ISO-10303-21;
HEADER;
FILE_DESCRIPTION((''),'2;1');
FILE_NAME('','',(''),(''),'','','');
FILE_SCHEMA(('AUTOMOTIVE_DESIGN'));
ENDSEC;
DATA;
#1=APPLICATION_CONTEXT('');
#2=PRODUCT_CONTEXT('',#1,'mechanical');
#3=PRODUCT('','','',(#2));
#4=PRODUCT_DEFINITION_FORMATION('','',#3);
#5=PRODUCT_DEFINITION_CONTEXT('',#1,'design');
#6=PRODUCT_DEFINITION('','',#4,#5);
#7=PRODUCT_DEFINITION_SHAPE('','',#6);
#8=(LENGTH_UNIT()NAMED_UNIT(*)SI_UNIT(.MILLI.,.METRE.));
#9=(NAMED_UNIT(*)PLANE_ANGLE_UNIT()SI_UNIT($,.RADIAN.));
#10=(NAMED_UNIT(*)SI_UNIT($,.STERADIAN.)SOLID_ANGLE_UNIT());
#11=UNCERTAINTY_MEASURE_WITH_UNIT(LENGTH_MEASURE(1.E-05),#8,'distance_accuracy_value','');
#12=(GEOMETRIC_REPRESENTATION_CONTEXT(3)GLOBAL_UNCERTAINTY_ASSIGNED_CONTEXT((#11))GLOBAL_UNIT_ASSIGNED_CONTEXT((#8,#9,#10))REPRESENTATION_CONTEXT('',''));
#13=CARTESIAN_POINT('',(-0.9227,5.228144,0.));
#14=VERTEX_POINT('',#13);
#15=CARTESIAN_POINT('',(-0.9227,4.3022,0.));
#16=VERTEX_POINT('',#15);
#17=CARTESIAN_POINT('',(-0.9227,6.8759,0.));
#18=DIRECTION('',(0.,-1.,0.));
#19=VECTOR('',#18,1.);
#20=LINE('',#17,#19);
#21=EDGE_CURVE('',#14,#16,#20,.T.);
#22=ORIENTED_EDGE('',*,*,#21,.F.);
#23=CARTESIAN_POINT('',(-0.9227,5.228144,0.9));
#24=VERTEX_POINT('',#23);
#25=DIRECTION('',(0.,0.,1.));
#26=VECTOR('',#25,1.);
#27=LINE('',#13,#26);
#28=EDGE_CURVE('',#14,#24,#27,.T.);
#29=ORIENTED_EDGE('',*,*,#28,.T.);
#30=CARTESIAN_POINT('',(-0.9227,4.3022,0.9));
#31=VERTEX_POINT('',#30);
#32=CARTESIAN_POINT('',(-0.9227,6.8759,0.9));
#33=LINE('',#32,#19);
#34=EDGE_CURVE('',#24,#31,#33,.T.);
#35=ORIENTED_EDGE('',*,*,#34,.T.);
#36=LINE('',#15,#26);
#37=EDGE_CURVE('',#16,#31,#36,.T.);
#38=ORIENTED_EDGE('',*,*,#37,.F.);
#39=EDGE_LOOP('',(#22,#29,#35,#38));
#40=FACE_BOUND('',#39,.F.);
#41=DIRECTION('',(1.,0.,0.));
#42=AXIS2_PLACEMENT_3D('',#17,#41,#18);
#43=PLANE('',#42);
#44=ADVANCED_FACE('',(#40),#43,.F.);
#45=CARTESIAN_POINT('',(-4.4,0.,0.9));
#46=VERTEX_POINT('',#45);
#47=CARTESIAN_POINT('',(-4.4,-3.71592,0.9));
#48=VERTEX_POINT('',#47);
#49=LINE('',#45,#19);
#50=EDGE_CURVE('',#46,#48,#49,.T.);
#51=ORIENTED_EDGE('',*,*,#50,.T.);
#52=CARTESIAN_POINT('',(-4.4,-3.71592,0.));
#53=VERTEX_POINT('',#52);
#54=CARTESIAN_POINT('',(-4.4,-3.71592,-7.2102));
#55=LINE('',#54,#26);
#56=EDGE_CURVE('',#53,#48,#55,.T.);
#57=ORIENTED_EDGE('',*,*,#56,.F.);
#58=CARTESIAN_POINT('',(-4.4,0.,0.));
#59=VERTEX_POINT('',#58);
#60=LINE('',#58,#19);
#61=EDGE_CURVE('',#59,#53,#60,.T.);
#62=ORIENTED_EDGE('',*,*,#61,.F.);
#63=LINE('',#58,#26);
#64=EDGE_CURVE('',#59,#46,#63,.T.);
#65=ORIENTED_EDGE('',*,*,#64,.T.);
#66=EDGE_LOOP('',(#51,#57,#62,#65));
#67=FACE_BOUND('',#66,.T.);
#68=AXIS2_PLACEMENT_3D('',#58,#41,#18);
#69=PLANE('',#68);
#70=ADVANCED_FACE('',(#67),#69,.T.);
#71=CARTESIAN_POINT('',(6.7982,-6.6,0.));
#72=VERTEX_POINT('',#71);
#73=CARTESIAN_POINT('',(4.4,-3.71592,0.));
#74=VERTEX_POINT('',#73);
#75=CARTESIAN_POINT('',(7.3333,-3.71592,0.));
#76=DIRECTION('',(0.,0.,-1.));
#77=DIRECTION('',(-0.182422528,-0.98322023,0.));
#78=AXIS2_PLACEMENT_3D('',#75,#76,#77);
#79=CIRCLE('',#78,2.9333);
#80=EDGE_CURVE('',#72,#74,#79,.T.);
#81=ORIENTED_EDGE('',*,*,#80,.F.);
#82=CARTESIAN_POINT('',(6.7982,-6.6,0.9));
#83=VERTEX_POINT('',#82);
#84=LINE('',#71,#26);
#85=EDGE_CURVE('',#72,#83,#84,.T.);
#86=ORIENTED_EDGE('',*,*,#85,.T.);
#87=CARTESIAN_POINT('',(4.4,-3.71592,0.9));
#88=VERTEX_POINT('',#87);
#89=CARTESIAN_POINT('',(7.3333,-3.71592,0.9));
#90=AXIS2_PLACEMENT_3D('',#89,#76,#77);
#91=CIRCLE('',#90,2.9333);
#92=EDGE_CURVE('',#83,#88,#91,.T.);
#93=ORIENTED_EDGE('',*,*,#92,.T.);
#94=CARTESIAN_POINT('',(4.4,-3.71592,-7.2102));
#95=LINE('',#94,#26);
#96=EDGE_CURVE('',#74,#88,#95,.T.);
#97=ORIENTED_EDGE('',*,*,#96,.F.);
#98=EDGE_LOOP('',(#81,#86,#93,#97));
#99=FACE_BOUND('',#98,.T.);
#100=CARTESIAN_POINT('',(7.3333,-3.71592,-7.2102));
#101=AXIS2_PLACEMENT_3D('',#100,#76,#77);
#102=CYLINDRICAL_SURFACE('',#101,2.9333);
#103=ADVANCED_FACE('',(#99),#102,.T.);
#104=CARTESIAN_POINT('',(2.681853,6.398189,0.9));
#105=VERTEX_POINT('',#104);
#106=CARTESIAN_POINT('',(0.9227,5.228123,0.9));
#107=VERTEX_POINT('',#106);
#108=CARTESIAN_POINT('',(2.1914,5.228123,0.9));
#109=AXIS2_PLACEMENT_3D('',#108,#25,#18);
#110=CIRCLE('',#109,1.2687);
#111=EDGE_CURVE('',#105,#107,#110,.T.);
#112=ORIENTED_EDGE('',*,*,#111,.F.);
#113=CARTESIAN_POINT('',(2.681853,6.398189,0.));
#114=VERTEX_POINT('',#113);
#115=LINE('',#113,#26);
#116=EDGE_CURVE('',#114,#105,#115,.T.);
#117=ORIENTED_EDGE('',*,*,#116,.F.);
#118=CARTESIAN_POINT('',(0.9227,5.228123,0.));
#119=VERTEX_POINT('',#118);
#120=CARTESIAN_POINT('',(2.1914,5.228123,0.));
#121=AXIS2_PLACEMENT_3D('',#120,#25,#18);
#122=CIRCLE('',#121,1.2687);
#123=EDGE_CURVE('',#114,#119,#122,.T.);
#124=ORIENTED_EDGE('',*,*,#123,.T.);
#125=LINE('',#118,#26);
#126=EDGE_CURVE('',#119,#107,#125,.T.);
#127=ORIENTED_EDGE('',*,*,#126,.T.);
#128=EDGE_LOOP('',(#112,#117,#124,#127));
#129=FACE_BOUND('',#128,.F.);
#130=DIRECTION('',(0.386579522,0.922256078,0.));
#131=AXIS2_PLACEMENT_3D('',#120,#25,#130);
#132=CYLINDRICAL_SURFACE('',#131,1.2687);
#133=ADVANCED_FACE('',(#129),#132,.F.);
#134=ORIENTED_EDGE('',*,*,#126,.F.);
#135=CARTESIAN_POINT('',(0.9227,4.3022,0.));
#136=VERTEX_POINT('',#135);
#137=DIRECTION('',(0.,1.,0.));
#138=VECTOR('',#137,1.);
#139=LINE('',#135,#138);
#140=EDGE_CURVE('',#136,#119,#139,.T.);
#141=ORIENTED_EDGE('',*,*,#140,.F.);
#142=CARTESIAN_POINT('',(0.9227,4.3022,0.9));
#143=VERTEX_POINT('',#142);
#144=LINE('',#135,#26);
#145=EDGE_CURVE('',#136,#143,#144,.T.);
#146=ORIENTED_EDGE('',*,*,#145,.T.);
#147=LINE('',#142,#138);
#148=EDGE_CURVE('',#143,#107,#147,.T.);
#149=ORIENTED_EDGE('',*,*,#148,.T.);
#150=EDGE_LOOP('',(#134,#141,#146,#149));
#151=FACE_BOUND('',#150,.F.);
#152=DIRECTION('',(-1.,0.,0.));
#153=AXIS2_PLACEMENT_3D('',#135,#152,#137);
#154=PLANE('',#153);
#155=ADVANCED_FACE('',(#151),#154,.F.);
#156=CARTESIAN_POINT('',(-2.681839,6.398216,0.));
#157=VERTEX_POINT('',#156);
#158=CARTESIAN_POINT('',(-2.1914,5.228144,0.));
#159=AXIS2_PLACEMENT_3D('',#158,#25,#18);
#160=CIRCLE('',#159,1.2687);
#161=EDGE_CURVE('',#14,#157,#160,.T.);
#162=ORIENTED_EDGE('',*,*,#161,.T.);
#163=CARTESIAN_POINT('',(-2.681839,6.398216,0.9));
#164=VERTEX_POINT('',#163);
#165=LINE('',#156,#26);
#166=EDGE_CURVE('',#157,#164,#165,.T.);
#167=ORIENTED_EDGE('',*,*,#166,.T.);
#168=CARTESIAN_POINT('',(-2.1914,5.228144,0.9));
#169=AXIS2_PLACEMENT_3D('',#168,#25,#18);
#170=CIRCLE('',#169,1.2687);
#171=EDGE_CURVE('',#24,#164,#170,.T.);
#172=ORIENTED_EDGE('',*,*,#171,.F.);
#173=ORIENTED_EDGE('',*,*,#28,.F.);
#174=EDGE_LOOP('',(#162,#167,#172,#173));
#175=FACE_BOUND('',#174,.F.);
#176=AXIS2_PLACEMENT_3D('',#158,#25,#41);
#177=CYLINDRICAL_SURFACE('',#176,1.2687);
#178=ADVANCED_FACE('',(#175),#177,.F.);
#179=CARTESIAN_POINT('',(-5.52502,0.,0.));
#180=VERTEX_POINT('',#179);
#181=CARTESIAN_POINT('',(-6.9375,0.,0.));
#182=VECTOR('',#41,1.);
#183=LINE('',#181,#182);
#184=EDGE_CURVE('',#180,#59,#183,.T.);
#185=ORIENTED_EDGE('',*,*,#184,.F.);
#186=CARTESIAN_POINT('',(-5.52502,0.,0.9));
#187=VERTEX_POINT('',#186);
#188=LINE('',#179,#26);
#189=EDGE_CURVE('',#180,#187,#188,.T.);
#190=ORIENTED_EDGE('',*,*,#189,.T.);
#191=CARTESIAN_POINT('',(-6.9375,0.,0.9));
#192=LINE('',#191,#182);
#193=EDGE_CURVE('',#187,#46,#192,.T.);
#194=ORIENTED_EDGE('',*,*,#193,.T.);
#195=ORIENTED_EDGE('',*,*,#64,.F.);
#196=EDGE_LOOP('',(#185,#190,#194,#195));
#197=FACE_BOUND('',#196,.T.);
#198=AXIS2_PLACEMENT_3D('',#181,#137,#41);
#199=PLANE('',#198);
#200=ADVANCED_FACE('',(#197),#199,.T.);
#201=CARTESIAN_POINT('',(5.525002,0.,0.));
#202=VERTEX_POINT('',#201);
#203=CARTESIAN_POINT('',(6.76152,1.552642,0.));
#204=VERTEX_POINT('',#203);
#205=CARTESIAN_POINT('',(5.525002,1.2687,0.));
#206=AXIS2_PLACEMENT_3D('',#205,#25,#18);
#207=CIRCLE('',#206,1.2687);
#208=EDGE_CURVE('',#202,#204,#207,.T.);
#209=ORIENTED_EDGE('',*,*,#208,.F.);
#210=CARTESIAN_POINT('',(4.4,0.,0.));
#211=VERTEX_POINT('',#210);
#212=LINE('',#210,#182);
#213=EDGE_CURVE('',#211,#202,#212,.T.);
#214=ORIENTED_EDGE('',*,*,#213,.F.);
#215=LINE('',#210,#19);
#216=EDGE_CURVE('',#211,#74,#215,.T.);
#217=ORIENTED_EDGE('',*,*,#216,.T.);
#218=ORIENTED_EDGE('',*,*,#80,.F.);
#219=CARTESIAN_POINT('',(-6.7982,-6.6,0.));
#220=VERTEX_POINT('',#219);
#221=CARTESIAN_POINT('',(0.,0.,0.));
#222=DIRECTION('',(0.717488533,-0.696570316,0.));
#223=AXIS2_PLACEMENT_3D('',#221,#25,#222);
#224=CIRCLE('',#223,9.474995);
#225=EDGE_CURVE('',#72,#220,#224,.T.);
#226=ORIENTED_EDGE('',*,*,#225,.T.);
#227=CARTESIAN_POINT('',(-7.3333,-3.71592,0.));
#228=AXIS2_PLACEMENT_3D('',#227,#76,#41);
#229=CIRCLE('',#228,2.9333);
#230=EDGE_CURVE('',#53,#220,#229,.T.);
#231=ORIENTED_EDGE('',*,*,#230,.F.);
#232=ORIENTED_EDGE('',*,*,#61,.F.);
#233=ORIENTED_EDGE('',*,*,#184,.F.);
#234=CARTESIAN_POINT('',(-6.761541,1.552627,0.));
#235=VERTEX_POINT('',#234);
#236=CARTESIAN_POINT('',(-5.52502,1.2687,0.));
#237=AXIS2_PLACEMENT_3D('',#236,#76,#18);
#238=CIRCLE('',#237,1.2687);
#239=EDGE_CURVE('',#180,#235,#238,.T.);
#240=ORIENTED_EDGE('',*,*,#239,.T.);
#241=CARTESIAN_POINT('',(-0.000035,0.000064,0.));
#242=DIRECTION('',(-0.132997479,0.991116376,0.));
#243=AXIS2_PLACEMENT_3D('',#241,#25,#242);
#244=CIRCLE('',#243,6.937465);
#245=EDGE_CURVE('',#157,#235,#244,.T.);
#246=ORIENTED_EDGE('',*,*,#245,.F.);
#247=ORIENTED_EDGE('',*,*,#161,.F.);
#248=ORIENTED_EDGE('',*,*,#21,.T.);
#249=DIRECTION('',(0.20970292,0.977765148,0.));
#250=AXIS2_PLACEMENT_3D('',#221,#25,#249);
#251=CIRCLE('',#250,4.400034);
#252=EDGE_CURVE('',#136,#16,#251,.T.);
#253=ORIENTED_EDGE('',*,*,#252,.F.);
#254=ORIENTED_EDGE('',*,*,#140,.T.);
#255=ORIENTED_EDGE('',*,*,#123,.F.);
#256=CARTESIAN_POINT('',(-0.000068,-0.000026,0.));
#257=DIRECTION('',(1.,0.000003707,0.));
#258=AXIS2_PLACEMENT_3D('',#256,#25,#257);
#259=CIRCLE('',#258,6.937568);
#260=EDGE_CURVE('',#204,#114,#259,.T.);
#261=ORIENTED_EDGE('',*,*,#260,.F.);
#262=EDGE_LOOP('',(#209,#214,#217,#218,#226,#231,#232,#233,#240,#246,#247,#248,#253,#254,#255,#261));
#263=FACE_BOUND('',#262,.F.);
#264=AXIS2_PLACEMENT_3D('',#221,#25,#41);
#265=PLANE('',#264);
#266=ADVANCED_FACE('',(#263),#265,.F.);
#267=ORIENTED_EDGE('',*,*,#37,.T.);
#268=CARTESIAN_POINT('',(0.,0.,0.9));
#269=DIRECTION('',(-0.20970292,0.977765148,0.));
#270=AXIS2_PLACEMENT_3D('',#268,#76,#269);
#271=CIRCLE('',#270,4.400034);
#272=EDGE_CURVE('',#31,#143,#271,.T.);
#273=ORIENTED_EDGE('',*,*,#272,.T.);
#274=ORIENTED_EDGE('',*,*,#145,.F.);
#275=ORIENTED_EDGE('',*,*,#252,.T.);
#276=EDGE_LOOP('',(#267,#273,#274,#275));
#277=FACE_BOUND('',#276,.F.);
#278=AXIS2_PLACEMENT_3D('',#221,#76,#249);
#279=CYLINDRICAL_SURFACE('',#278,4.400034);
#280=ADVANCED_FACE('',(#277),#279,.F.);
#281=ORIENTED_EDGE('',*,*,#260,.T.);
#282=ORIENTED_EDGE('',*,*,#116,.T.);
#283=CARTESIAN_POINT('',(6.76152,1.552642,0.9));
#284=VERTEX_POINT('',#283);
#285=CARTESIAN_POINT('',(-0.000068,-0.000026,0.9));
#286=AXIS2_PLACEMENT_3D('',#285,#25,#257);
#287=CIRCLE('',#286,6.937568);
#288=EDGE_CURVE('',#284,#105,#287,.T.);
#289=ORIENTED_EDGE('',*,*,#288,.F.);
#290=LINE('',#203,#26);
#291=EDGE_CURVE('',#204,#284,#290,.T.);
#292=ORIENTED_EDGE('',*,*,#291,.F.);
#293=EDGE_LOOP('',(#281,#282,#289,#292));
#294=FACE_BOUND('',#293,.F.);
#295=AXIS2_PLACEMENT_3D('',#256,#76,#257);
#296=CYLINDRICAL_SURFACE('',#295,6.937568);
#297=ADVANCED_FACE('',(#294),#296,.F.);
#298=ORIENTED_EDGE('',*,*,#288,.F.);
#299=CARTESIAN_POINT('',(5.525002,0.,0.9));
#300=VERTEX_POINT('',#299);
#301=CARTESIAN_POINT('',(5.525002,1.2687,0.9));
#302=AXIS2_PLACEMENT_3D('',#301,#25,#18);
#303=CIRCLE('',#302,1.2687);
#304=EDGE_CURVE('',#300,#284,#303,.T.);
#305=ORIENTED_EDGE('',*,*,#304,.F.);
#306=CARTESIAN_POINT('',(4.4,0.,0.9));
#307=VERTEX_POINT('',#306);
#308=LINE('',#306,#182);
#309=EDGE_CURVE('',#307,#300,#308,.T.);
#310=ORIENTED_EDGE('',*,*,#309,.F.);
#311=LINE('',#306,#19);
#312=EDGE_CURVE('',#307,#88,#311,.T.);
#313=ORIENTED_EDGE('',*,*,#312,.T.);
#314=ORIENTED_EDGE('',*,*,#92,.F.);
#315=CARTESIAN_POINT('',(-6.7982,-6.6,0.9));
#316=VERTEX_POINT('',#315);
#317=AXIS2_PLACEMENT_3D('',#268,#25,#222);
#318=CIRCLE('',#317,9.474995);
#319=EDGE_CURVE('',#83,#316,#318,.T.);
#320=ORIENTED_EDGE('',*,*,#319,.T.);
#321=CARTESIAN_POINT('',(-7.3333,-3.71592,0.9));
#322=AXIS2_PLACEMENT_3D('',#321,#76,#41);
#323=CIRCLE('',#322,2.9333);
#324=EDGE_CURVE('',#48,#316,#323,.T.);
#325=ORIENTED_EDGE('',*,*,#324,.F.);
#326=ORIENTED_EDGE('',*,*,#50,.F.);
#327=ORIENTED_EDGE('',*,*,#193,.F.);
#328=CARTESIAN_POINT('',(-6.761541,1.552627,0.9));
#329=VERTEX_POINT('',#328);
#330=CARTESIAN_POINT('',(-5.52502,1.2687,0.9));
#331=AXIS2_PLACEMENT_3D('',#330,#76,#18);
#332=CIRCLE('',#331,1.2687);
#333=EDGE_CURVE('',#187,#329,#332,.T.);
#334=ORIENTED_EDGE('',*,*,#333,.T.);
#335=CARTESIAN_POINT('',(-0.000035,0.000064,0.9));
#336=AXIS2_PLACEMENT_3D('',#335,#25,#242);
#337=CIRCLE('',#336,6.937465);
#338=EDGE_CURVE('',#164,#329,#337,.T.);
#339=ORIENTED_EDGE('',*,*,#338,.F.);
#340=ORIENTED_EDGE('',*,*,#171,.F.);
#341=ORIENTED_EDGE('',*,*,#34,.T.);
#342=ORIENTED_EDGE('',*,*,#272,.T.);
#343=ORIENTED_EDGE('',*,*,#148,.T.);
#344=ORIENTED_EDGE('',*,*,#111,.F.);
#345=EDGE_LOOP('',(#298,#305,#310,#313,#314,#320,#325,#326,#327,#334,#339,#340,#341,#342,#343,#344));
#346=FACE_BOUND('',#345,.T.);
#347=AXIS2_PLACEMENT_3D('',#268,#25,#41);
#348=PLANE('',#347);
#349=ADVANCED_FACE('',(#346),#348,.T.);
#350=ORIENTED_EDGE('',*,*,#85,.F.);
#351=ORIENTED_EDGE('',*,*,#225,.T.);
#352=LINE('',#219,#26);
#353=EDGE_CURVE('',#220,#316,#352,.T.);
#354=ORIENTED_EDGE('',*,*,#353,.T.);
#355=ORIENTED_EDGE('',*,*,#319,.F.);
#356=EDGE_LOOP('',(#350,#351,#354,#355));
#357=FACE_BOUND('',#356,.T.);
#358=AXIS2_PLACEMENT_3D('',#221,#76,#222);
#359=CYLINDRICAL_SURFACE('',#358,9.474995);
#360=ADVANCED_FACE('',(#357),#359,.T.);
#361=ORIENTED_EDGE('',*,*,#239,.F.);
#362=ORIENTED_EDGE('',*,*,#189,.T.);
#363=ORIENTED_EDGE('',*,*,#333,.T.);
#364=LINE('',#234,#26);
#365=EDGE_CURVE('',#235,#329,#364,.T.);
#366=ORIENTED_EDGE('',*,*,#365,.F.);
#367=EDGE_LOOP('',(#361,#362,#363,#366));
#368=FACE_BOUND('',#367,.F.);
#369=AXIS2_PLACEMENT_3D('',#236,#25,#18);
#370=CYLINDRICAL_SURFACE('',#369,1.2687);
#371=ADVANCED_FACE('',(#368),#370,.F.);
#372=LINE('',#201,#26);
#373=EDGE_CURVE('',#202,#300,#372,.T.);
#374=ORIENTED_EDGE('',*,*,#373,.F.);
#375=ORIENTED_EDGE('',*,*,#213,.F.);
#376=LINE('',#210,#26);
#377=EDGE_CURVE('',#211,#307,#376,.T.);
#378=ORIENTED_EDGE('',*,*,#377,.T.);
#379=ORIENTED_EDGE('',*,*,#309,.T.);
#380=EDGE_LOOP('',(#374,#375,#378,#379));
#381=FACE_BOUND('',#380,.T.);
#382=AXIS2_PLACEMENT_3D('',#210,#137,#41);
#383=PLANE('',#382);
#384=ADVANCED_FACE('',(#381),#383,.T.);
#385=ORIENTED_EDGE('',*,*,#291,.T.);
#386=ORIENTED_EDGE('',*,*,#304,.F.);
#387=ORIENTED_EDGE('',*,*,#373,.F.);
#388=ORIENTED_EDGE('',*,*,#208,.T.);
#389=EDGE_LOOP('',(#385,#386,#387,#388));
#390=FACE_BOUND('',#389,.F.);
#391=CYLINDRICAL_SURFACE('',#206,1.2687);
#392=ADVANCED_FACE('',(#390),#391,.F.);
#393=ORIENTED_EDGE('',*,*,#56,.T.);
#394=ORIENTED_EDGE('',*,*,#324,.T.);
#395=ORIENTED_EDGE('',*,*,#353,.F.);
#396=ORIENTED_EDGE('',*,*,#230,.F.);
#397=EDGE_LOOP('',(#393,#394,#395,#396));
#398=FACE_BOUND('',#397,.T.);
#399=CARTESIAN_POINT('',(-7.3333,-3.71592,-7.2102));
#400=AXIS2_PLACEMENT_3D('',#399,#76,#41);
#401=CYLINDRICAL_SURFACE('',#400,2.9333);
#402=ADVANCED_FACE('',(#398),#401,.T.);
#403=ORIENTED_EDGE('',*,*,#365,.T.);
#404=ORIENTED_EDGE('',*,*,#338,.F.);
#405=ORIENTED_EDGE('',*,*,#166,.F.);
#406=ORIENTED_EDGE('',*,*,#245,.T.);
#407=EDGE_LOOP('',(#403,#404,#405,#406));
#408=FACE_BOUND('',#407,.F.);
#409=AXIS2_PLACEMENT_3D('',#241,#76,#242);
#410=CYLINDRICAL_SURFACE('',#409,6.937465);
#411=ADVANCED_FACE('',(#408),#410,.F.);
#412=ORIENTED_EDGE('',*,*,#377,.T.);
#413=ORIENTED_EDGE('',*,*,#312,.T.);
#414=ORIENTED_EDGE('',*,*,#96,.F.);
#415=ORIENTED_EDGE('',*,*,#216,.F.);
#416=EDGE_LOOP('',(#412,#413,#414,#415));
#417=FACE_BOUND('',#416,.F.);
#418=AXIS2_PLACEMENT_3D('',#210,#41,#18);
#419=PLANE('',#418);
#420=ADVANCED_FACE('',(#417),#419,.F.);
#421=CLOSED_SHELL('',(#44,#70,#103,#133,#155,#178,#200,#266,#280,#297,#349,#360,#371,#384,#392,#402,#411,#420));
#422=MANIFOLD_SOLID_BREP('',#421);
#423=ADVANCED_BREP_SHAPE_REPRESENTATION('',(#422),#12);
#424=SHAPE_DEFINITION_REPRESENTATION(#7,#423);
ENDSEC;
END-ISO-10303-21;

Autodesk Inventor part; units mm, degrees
ref_plane "YZ Plane" through (0, 0, 0) normal (1, 0, 0) x (0, 1, 0)
ref_plane "XZ Plane" through (0, 0, 0) normal (0, 1, 0) x (-1, 0, 0)
ref_plane "XY Plane" through (0, 0, 0) normal (0, 0, 1) x (1, 0, 0)
sketch "草图2" plane through (0, 0, 0) normal (0, 0, 1) x (1, 0, 0)
  line L0 (-6.9375, 0) -> (-4.4, 0)
  arc A0 (-0.9227, 6.8759) -> (-6.9375, 0) centre (0, 0) ccw
  line L1 (-0.9227, 6.8759) -> (-0.9227, 4.3022)
  arc A1 (0.9227, 4.3022) -> (-0.9227, 4.3022) centre (0, 0) ccw
  line L2 (0.9227, 4.3022) -> (0.9227, 6.8759)
  arc A2 (6.9375, 0) -> (0.9227, 6.8759) centre (0, 0) ccw
  line L3 (4.4, 0) -> (6.9375, 0)
  arc A3 (6.7982, -6.6) -> (-6.7982, -6.6) centre (0, 0) ccw
  line L4 (0, -3.55) -> (0, 5.55) projected
  line L5 (-4.4, 0) -> (-4.4, -6.6)
  line L6 (-4.4, -6.6) -> (-6.7982, -6.6)
  line L7 (4.4, 0) -> (4.4, -6.6)
  line L8 (4.4, -6.6) -> (6.7982, -6.6)
  dimension "d29" = 18.95
  dimension "d33" = 13.875
  dimension "d39" = 0.9227
  dimension "d40" = 4.4
  dimension "d41" = 6.6
extrude "拉伸1" add sketch "草图2" along normal blind 0.9
fillet "圆角1" radius 1.2687 4 edges at (-6.9375, 0, 0.45) (-0.9227, 6.8759, 0.45) (0.9227, 6.8759, 0.45) (6.9375, 0, 0.45)
fillet "圆角2" radius 2.9333 2 edges at (-4.4, -6.6, 0.45) (4.4, -6.6, 0.45)
equation "\"d29\" = l2"
equation "\"d33\" = 0.5 * Diam2 + 0.5 * l2"
equation "\"d39\" = -0.0909091 * Diam2 + 0.0909091 * l2"
equation "\"d40\" = 0.5 * Diam2"
equation "\"d41\" = 0.75 * Diam2"
equation "\"d20\" = t1"
equation "\"d22\" = -0.125 * Diam2 + 0.125 * l2"
equation "\"d42\" = 0.333333 * Diam2"
equation "\"l2\" = 18.95"
equation "\"t1\" = 0.9"
equation "\"Diam2\" = 8.8"
equation "\"sd\" = 11"
equation "\"TEMPLATE\" = 1.2345"
properties part number "ASME B27.8M - 3EM1-11" material "钢，软"
